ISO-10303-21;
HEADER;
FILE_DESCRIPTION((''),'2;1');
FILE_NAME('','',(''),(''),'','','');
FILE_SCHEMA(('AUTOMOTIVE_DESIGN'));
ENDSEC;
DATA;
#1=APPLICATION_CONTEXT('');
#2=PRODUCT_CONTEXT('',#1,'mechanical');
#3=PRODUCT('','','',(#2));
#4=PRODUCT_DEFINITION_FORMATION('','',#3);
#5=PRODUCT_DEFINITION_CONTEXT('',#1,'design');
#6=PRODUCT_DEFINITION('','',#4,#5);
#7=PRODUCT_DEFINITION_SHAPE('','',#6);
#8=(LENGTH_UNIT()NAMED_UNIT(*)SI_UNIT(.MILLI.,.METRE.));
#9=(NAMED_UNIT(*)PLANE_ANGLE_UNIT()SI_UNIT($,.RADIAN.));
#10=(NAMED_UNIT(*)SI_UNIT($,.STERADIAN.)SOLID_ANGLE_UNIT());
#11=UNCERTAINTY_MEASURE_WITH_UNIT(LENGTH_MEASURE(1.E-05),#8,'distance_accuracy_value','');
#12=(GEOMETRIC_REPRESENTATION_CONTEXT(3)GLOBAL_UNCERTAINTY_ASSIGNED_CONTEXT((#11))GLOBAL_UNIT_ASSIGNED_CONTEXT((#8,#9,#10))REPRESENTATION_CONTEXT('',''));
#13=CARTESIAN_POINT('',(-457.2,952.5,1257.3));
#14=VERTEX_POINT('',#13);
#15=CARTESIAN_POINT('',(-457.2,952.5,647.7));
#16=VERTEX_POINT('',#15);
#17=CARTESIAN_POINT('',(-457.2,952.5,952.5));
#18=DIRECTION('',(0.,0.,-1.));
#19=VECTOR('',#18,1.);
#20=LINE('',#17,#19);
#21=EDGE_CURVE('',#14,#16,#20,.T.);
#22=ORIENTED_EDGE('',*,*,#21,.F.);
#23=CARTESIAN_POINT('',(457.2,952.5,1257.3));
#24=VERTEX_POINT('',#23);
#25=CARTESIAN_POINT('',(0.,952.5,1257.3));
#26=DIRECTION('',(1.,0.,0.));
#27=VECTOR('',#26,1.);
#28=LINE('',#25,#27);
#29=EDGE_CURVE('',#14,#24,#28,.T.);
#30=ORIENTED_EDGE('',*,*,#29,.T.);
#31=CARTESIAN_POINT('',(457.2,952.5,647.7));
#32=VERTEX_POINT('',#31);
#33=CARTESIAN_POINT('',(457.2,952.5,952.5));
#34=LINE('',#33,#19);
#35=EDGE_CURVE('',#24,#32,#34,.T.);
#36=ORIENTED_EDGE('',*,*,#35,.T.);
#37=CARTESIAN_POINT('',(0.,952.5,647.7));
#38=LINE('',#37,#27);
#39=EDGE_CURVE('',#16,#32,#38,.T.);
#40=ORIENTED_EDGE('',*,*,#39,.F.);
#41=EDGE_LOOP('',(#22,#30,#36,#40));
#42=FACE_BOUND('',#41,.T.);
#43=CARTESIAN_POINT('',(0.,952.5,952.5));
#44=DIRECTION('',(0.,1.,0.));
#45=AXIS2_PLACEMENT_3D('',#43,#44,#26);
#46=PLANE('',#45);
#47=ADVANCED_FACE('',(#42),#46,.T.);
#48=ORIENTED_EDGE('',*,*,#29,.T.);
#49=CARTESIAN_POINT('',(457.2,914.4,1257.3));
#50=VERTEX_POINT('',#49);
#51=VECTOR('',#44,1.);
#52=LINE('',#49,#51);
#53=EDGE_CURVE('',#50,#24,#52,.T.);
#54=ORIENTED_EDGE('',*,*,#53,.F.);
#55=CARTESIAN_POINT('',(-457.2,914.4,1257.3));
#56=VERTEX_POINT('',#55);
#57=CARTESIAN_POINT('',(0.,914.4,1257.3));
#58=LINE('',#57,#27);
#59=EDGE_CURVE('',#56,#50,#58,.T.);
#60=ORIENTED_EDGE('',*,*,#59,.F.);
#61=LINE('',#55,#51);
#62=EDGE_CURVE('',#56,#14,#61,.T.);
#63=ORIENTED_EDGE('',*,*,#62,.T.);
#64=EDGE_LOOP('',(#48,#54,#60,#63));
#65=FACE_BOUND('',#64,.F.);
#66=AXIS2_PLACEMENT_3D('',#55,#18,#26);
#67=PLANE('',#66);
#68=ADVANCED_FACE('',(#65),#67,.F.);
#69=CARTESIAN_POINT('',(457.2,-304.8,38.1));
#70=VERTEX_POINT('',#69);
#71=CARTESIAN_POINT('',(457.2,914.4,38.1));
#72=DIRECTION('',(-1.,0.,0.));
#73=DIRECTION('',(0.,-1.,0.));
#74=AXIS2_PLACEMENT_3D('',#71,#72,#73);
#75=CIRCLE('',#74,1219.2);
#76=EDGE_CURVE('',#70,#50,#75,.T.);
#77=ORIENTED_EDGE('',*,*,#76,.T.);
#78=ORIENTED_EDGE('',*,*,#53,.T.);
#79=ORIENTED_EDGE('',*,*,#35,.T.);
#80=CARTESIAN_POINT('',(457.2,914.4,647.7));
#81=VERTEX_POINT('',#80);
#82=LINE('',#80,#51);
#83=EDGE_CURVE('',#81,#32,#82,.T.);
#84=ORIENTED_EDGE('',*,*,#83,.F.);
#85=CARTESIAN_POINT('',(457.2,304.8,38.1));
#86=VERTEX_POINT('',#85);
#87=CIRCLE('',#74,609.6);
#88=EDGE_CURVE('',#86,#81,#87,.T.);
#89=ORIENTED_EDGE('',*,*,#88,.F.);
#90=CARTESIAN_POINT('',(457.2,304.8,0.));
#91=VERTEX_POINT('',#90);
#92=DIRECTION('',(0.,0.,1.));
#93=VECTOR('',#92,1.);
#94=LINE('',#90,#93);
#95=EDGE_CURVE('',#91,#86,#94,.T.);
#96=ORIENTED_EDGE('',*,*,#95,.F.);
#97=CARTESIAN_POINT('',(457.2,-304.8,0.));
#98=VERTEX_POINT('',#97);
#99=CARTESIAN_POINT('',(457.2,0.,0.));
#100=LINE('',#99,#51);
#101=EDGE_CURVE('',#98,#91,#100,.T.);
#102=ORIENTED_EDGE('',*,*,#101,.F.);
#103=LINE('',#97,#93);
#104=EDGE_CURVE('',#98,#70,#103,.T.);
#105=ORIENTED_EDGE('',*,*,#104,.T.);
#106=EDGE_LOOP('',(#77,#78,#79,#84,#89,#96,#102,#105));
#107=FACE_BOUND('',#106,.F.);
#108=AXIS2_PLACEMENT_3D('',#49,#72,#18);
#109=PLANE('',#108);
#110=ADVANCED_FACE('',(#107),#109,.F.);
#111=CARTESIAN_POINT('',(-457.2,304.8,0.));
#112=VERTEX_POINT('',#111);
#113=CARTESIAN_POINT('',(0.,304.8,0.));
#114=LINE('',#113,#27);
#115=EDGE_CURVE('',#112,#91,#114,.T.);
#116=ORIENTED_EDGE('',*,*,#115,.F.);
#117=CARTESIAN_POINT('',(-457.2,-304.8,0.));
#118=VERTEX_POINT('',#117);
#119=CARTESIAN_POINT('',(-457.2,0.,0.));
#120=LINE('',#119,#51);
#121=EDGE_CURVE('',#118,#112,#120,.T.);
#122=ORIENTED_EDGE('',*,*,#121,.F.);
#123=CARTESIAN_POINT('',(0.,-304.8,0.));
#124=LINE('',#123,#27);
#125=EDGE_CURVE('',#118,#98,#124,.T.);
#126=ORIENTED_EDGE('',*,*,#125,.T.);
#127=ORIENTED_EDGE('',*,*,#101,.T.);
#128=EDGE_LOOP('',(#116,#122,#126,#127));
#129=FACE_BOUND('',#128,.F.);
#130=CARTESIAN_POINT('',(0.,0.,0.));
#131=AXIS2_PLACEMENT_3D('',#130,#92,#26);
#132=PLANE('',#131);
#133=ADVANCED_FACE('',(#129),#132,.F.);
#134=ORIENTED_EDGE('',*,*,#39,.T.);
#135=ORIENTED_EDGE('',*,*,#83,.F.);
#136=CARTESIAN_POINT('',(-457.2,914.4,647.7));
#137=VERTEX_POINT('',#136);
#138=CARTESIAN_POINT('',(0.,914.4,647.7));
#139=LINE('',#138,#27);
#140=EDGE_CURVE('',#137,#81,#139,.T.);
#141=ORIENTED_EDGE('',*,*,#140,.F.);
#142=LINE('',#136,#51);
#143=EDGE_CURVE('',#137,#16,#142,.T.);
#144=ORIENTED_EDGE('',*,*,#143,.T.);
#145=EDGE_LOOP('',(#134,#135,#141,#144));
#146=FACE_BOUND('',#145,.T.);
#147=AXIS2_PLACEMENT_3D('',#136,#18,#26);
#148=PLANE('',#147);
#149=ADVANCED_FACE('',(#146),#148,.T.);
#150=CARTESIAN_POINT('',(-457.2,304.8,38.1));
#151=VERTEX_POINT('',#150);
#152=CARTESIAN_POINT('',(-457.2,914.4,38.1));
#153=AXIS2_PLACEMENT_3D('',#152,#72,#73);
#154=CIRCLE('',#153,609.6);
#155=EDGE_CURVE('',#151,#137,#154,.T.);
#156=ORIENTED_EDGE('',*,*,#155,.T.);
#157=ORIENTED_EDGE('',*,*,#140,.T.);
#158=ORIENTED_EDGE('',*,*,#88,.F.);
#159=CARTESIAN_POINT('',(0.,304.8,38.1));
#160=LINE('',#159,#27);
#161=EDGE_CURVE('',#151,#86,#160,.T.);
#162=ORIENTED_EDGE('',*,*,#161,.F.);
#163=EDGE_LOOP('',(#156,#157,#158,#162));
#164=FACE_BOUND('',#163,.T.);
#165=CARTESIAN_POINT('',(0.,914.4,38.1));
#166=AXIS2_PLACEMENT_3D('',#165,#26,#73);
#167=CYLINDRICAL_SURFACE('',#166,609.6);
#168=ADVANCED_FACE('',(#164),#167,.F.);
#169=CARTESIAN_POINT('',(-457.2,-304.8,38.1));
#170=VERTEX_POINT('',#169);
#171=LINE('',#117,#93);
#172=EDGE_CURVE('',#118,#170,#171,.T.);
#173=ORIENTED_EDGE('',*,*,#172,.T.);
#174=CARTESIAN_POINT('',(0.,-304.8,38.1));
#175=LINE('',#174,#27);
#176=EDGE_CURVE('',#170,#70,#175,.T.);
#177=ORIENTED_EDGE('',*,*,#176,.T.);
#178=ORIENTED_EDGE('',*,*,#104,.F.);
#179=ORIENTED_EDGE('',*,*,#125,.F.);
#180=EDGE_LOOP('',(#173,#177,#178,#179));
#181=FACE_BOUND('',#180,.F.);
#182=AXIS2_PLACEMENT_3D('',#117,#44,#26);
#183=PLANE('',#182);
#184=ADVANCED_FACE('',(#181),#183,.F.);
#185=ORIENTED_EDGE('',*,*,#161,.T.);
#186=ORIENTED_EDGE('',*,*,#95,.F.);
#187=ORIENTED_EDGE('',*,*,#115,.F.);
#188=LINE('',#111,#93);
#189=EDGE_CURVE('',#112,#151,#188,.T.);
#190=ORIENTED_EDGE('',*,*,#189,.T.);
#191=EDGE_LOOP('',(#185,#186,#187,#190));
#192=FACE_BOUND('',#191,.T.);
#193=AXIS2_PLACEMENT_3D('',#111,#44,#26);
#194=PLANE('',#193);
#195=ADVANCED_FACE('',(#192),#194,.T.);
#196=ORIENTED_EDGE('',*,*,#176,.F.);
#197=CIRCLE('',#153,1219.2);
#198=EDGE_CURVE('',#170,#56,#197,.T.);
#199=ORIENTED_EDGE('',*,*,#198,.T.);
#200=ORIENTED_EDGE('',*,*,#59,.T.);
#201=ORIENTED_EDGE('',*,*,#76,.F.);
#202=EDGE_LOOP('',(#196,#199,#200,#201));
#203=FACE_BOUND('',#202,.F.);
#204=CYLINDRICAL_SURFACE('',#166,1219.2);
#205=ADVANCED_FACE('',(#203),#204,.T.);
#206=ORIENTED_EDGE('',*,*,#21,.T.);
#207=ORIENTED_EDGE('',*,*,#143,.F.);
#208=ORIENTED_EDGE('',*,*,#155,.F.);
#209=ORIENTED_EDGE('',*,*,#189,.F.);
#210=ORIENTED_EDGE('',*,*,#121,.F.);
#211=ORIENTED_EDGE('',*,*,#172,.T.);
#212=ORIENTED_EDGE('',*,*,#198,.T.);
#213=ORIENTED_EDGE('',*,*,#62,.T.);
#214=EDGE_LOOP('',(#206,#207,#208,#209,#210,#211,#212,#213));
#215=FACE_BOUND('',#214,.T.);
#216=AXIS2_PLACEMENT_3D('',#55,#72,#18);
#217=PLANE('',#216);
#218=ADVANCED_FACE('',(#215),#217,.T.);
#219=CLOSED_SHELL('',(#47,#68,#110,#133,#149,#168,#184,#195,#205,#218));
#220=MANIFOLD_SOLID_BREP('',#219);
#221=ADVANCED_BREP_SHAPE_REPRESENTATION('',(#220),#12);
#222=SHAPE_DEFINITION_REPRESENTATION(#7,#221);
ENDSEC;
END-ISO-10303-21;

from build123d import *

# Parameters (mm, degrees)
F0_W     = 914.4
F0_H     = 609.6
F1_DEPTH = 38.1
F2_W     = 914.4
F2_H     = 609.6
F3_ANGLE = 90
F4_DEPTH = 38.1


with BuildPart() as f1:
    # F0 (on Top) → F1 (new body)
    with BuildSketch(Plane.XY):
        Rectangle(F0_W, F0_H)
    extrude(amount=F1_DEPTH)

    # F2 (on face) → F3 (revolve)
    with BuildSketch(Plane.XY.offset(38.1)):
        Rectangle(F2_W, F2_H)
    revolve(axis=Axis((-103.2055318356, 914.4, 38.1), (-1, 0, 0)), revolution_arc=F3_ANGLE)

    # F4 (add): a face of the model
    f4_faces = [f1.faces().sort_by_distance(p)[0] for p in [
        (0, 914.4, 952.5),
    ]]
    extrude(f4_faces, amount=F4_DEPTH)


solid = f1.part
